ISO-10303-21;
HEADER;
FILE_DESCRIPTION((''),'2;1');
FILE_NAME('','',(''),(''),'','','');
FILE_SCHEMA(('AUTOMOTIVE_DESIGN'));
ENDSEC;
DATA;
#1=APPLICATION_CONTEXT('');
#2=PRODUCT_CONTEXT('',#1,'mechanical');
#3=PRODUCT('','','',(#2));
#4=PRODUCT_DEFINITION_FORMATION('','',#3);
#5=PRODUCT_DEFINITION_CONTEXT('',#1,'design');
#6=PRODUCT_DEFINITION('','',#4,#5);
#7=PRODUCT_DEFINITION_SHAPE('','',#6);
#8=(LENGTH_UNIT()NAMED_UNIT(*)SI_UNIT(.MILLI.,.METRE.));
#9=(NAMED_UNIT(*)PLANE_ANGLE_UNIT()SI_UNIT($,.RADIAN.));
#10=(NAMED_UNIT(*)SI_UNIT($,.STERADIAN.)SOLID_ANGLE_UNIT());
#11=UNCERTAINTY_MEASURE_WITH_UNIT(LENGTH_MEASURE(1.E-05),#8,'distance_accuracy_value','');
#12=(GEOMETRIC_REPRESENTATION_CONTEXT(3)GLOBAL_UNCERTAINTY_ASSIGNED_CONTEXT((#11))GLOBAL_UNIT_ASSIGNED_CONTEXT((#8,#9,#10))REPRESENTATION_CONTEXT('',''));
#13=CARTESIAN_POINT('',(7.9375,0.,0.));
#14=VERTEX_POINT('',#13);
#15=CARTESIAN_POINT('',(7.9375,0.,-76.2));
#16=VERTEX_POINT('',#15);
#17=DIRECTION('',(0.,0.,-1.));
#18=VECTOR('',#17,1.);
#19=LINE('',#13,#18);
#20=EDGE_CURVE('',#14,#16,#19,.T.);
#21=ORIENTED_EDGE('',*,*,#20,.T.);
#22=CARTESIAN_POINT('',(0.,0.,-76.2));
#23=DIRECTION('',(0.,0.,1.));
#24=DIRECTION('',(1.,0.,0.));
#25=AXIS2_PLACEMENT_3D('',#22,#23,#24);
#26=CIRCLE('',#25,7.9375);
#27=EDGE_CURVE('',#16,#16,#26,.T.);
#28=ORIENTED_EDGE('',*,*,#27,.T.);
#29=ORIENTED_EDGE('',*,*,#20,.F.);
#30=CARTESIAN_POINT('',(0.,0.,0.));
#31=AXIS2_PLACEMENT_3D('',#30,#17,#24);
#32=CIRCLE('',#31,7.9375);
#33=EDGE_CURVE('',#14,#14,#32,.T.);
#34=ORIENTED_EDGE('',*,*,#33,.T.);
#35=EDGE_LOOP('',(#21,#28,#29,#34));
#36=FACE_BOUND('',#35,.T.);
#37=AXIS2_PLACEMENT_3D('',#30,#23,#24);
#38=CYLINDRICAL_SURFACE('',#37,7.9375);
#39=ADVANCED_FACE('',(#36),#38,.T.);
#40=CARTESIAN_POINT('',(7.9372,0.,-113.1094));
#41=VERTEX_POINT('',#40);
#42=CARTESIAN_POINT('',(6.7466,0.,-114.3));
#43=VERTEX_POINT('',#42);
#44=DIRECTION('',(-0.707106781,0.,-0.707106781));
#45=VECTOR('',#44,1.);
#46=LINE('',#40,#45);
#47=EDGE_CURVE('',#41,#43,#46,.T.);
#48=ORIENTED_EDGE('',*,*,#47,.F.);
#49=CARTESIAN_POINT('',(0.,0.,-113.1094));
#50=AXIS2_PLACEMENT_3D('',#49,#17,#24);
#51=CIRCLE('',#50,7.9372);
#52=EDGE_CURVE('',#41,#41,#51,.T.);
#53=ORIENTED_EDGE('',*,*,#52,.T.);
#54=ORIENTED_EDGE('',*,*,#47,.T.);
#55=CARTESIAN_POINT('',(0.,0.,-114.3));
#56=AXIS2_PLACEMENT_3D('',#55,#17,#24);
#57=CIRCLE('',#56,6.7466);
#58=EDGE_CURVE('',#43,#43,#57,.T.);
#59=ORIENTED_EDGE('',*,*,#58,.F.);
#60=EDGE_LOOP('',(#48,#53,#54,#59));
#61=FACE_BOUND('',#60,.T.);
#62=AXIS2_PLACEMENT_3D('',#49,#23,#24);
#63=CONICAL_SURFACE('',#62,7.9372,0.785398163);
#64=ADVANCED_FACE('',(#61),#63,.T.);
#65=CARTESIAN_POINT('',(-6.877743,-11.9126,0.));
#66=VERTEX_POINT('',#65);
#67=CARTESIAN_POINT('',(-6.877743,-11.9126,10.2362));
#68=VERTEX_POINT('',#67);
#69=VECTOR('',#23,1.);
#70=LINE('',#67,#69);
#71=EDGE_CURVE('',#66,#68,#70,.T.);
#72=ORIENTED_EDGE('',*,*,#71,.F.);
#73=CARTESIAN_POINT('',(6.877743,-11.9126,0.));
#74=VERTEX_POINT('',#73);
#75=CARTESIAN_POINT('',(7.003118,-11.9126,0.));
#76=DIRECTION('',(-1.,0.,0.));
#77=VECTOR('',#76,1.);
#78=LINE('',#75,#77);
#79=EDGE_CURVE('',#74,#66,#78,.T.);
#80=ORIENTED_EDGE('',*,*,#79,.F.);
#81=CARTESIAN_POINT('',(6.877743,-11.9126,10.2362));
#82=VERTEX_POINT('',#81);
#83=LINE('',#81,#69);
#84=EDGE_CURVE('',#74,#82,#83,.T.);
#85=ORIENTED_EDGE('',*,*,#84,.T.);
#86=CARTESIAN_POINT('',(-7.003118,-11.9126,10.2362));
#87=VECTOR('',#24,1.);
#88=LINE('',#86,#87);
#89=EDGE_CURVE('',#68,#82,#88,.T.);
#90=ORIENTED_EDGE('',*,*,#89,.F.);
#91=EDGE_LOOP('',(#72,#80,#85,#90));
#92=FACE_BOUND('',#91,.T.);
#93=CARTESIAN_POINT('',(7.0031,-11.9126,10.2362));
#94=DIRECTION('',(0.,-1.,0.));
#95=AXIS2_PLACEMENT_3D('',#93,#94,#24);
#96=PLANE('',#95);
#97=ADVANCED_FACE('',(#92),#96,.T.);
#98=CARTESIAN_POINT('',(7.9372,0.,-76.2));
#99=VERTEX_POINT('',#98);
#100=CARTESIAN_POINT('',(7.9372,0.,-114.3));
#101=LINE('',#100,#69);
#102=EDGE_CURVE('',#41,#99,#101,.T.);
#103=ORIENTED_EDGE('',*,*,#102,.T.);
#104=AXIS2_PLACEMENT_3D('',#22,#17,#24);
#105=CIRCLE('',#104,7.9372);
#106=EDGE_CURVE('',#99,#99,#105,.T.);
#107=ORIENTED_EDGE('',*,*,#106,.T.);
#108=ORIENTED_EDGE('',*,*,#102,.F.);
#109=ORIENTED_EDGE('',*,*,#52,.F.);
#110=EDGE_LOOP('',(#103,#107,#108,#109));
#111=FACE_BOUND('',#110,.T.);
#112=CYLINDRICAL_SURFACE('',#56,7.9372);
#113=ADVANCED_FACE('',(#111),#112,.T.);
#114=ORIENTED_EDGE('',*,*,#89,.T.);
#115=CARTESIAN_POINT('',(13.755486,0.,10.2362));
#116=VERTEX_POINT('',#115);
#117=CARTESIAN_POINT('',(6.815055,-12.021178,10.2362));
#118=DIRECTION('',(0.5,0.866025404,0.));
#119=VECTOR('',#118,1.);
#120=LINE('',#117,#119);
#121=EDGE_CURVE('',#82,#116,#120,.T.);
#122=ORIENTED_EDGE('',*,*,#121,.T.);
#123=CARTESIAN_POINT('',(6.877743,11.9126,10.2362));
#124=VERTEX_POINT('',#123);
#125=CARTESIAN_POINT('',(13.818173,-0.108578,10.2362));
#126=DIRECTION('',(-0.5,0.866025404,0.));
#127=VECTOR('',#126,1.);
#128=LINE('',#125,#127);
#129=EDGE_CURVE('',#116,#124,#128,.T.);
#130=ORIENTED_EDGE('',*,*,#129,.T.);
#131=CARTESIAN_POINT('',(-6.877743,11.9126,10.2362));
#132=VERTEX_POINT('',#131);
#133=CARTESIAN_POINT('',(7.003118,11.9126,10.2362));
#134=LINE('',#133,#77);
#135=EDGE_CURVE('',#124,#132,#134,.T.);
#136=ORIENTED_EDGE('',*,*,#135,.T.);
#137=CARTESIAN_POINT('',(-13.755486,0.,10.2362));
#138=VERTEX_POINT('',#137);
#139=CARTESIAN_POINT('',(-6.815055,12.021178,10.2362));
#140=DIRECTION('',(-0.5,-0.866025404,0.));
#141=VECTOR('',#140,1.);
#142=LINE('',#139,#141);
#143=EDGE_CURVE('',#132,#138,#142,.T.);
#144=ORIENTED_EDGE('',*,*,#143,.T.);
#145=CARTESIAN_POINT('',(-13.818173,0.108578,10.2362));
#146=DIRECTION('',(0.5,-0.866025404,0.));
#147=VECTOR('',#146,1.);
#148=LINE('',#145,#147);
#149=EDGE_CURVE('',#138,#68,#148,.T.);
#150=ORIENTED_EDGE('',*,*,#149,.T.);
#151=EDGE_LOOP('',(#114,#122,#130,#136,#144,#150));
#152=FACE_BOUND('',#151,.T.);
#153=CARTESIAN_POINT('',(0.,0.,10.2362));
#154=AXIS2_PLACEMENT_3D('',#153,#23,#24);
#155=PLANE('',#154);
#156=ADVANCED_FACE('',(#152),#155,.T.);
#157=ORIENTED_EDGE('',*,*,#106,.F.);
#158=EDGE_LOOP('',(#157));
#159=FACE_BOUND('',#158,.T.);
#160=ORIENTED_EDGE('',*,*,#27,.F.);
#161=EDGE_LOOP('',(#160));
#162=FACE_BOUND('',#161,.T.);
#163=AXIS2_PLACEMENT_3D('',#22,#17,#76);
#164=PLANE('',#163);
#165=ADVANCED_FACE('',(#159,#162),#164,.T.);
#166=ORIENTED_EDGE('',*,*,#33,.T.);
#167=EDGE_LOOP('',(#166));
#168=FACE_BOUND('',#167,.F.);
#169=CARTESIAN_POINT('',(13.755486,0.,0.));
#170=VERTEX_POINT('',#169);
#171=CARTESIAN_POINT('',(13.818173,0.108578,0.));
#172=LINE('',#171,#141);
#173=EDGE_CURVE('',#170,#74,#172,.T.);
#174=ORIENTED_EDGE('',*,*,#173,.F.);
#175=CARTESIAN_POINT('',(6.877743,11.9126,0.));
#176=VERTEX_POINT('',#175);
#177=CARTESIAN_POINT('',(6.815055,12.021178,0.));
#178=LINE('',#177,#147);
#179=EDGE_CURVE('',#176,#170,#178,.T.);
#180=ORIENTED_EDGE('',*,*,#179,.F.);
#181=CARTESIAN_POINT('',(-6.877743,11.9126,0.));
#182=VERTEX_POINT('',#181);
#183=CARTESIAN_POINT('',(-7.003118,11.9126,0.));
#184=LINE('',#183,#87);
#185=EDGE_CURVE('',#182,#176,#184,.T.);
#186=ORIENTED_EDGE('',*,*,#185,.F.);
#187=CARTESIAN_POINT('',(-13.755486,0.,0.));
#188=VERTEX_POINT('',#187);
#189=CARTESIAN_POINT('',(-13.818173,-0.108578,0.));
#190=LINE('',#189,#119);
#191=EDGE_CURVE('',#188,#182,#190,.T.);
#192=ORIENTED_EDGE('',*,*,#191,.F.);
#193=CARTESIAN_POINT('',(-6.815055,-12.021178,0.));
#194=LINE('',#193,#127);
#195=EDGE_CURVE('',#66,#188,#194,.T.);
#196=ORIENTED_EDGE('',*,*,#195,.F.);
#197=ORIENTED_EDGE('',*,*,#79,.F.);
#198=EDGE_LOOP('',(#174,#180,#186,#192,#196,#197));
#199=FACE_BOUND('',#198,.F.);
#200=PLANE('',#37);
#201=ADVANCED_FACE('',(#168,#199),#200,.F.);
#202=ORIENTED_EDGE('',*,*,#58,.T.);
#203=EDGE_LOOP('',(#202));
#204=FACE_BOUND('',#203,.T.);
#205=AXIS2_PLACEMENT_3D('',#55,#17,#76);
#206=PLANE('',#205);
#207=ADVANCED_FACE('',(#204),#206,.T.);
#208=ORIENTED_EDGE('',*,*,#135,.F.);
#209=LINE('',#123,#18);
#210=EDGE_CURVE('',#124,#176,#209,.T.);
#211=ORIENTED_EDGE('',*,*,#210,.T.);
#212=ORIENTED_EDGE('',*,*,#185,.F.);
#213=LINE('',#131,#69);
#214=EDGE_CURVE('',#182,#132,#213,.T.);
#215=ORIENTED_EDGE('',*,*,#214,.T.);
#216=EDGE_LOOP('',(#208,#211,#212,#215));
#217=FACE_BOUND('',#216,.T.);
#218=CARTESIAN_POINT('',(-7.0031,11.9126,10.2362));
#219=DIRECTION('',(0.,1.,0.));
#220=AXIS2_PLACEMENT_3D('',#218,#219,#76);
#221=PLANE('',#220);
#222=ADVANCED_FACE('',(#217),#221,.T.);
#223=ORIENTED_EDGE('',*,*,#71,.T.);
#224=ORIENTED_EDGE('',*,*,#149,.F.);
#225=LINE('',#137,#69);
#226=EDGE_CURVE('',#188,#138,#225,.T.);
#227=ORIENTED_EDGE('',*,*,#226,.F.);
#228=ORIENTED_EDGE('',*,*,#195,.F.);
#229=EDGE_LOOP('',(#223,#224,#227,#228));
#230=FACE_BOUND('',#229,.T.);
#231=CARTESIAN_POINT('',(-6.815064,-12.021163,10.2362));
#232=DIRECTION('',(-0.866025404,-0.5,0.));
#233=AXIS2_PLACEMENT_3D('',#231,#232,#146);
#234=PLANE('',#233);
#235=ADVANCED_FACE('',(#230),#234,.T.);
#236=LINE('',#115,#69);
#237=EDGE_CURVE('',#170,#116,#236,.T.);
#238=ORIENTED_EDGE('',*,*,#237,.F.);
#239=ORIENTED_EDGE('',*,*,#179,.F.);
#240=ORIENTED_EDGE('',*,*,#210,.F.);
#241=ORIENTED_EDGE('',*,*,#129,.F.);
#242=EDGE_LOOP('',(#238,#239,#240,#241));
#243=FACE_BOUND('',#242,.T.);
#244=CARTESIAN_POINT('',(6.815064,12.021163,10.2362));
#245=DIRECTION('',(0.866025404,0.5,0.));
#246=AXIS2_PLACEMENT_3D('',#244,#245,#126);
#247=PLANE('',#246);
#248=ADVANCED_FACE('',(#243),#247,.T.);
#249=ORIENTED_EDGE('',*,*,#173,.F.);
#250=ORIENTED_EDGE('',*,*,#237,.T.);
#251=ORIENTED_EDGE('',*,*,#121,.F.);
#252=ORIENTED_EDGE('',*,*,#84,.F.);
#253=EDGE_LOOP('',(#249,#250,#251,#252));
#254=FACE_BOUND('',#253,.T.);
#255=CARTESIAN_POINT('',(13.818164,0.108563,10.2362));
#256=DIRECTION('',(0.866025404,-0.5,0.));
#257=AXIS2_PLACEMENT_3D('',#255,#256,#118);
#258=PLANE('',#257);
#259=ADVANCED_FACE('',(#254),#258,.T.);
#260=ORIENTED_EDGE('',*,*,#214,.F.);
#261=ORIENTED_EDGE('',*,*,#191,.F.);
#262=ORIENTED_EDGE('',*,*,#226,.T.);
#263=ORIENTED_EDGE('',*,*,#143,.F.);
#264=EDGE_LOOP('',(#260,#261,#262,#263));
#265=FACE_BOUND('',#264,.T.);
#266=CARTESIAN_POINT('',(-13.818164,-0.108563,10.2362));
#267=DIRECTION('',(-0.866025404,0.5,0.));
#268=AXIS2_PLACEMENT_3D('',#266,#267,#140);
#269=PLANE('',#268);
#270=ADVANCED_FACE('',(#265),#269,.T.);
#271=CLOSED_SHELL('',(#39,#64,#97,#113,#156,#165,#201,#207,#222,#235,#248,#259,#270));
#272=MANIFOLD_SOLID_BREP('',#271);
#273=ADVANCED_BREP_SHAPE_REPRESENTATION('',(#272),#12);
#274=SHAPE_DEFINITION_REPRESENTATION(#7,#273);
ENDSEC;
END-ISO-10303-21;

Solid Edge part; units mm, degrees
sketch "Sketch1" plane through (0, 0, 0) normal (0, 0, 1) x (1, 0, 0)
  circle A0 centre (0, 0) radius 13.8186
  dimension "D1" = 27.6372
extrude "Protrusion1" add sketch "Sketch1" along normal blind 10.2362
sketch "Sketch2" plane through (0, 0, 0) normal (0, 0, -1) x (1, 0, 0)
  circle A0 centre (0, 0) radius 7.9375
extrude "Protrusion2" add sketch "Sketch2" along normal blind 114.3
sketch "Sketch3" plane through (0, 0, -114.3) normal (0, 0, -1) x (1, 0, 0)
  circle A0 centre (0, 0) radius 7.9372
extrude "Cutout1" cut sketch "Sketch3" against normal blind 38.1 flip side to cut
chamfer "Chamfer_1" distance 1.1906 angle 45 1 edges at (-7.9372, 0, -114.3)
sketch "Sketch4" plane through (0, 0, 10.2362) normal (0, 0, 1) x (1, 0, 0)
  line L0 (-7.0031, 11.9126) -> (7.0031, 11.9126)
  dimension "D1" = 23.8252
extrude "Cutout2" cut sketch "Sketch4" against normal up to next material side at (0, 11.9626, 10.2362)
pattern_circular "Pattern1" count 6 over 360 about axis through (0, 0, 10.2362) along (0, 0, 1) of "Cutout2"
properties part number "201071"
